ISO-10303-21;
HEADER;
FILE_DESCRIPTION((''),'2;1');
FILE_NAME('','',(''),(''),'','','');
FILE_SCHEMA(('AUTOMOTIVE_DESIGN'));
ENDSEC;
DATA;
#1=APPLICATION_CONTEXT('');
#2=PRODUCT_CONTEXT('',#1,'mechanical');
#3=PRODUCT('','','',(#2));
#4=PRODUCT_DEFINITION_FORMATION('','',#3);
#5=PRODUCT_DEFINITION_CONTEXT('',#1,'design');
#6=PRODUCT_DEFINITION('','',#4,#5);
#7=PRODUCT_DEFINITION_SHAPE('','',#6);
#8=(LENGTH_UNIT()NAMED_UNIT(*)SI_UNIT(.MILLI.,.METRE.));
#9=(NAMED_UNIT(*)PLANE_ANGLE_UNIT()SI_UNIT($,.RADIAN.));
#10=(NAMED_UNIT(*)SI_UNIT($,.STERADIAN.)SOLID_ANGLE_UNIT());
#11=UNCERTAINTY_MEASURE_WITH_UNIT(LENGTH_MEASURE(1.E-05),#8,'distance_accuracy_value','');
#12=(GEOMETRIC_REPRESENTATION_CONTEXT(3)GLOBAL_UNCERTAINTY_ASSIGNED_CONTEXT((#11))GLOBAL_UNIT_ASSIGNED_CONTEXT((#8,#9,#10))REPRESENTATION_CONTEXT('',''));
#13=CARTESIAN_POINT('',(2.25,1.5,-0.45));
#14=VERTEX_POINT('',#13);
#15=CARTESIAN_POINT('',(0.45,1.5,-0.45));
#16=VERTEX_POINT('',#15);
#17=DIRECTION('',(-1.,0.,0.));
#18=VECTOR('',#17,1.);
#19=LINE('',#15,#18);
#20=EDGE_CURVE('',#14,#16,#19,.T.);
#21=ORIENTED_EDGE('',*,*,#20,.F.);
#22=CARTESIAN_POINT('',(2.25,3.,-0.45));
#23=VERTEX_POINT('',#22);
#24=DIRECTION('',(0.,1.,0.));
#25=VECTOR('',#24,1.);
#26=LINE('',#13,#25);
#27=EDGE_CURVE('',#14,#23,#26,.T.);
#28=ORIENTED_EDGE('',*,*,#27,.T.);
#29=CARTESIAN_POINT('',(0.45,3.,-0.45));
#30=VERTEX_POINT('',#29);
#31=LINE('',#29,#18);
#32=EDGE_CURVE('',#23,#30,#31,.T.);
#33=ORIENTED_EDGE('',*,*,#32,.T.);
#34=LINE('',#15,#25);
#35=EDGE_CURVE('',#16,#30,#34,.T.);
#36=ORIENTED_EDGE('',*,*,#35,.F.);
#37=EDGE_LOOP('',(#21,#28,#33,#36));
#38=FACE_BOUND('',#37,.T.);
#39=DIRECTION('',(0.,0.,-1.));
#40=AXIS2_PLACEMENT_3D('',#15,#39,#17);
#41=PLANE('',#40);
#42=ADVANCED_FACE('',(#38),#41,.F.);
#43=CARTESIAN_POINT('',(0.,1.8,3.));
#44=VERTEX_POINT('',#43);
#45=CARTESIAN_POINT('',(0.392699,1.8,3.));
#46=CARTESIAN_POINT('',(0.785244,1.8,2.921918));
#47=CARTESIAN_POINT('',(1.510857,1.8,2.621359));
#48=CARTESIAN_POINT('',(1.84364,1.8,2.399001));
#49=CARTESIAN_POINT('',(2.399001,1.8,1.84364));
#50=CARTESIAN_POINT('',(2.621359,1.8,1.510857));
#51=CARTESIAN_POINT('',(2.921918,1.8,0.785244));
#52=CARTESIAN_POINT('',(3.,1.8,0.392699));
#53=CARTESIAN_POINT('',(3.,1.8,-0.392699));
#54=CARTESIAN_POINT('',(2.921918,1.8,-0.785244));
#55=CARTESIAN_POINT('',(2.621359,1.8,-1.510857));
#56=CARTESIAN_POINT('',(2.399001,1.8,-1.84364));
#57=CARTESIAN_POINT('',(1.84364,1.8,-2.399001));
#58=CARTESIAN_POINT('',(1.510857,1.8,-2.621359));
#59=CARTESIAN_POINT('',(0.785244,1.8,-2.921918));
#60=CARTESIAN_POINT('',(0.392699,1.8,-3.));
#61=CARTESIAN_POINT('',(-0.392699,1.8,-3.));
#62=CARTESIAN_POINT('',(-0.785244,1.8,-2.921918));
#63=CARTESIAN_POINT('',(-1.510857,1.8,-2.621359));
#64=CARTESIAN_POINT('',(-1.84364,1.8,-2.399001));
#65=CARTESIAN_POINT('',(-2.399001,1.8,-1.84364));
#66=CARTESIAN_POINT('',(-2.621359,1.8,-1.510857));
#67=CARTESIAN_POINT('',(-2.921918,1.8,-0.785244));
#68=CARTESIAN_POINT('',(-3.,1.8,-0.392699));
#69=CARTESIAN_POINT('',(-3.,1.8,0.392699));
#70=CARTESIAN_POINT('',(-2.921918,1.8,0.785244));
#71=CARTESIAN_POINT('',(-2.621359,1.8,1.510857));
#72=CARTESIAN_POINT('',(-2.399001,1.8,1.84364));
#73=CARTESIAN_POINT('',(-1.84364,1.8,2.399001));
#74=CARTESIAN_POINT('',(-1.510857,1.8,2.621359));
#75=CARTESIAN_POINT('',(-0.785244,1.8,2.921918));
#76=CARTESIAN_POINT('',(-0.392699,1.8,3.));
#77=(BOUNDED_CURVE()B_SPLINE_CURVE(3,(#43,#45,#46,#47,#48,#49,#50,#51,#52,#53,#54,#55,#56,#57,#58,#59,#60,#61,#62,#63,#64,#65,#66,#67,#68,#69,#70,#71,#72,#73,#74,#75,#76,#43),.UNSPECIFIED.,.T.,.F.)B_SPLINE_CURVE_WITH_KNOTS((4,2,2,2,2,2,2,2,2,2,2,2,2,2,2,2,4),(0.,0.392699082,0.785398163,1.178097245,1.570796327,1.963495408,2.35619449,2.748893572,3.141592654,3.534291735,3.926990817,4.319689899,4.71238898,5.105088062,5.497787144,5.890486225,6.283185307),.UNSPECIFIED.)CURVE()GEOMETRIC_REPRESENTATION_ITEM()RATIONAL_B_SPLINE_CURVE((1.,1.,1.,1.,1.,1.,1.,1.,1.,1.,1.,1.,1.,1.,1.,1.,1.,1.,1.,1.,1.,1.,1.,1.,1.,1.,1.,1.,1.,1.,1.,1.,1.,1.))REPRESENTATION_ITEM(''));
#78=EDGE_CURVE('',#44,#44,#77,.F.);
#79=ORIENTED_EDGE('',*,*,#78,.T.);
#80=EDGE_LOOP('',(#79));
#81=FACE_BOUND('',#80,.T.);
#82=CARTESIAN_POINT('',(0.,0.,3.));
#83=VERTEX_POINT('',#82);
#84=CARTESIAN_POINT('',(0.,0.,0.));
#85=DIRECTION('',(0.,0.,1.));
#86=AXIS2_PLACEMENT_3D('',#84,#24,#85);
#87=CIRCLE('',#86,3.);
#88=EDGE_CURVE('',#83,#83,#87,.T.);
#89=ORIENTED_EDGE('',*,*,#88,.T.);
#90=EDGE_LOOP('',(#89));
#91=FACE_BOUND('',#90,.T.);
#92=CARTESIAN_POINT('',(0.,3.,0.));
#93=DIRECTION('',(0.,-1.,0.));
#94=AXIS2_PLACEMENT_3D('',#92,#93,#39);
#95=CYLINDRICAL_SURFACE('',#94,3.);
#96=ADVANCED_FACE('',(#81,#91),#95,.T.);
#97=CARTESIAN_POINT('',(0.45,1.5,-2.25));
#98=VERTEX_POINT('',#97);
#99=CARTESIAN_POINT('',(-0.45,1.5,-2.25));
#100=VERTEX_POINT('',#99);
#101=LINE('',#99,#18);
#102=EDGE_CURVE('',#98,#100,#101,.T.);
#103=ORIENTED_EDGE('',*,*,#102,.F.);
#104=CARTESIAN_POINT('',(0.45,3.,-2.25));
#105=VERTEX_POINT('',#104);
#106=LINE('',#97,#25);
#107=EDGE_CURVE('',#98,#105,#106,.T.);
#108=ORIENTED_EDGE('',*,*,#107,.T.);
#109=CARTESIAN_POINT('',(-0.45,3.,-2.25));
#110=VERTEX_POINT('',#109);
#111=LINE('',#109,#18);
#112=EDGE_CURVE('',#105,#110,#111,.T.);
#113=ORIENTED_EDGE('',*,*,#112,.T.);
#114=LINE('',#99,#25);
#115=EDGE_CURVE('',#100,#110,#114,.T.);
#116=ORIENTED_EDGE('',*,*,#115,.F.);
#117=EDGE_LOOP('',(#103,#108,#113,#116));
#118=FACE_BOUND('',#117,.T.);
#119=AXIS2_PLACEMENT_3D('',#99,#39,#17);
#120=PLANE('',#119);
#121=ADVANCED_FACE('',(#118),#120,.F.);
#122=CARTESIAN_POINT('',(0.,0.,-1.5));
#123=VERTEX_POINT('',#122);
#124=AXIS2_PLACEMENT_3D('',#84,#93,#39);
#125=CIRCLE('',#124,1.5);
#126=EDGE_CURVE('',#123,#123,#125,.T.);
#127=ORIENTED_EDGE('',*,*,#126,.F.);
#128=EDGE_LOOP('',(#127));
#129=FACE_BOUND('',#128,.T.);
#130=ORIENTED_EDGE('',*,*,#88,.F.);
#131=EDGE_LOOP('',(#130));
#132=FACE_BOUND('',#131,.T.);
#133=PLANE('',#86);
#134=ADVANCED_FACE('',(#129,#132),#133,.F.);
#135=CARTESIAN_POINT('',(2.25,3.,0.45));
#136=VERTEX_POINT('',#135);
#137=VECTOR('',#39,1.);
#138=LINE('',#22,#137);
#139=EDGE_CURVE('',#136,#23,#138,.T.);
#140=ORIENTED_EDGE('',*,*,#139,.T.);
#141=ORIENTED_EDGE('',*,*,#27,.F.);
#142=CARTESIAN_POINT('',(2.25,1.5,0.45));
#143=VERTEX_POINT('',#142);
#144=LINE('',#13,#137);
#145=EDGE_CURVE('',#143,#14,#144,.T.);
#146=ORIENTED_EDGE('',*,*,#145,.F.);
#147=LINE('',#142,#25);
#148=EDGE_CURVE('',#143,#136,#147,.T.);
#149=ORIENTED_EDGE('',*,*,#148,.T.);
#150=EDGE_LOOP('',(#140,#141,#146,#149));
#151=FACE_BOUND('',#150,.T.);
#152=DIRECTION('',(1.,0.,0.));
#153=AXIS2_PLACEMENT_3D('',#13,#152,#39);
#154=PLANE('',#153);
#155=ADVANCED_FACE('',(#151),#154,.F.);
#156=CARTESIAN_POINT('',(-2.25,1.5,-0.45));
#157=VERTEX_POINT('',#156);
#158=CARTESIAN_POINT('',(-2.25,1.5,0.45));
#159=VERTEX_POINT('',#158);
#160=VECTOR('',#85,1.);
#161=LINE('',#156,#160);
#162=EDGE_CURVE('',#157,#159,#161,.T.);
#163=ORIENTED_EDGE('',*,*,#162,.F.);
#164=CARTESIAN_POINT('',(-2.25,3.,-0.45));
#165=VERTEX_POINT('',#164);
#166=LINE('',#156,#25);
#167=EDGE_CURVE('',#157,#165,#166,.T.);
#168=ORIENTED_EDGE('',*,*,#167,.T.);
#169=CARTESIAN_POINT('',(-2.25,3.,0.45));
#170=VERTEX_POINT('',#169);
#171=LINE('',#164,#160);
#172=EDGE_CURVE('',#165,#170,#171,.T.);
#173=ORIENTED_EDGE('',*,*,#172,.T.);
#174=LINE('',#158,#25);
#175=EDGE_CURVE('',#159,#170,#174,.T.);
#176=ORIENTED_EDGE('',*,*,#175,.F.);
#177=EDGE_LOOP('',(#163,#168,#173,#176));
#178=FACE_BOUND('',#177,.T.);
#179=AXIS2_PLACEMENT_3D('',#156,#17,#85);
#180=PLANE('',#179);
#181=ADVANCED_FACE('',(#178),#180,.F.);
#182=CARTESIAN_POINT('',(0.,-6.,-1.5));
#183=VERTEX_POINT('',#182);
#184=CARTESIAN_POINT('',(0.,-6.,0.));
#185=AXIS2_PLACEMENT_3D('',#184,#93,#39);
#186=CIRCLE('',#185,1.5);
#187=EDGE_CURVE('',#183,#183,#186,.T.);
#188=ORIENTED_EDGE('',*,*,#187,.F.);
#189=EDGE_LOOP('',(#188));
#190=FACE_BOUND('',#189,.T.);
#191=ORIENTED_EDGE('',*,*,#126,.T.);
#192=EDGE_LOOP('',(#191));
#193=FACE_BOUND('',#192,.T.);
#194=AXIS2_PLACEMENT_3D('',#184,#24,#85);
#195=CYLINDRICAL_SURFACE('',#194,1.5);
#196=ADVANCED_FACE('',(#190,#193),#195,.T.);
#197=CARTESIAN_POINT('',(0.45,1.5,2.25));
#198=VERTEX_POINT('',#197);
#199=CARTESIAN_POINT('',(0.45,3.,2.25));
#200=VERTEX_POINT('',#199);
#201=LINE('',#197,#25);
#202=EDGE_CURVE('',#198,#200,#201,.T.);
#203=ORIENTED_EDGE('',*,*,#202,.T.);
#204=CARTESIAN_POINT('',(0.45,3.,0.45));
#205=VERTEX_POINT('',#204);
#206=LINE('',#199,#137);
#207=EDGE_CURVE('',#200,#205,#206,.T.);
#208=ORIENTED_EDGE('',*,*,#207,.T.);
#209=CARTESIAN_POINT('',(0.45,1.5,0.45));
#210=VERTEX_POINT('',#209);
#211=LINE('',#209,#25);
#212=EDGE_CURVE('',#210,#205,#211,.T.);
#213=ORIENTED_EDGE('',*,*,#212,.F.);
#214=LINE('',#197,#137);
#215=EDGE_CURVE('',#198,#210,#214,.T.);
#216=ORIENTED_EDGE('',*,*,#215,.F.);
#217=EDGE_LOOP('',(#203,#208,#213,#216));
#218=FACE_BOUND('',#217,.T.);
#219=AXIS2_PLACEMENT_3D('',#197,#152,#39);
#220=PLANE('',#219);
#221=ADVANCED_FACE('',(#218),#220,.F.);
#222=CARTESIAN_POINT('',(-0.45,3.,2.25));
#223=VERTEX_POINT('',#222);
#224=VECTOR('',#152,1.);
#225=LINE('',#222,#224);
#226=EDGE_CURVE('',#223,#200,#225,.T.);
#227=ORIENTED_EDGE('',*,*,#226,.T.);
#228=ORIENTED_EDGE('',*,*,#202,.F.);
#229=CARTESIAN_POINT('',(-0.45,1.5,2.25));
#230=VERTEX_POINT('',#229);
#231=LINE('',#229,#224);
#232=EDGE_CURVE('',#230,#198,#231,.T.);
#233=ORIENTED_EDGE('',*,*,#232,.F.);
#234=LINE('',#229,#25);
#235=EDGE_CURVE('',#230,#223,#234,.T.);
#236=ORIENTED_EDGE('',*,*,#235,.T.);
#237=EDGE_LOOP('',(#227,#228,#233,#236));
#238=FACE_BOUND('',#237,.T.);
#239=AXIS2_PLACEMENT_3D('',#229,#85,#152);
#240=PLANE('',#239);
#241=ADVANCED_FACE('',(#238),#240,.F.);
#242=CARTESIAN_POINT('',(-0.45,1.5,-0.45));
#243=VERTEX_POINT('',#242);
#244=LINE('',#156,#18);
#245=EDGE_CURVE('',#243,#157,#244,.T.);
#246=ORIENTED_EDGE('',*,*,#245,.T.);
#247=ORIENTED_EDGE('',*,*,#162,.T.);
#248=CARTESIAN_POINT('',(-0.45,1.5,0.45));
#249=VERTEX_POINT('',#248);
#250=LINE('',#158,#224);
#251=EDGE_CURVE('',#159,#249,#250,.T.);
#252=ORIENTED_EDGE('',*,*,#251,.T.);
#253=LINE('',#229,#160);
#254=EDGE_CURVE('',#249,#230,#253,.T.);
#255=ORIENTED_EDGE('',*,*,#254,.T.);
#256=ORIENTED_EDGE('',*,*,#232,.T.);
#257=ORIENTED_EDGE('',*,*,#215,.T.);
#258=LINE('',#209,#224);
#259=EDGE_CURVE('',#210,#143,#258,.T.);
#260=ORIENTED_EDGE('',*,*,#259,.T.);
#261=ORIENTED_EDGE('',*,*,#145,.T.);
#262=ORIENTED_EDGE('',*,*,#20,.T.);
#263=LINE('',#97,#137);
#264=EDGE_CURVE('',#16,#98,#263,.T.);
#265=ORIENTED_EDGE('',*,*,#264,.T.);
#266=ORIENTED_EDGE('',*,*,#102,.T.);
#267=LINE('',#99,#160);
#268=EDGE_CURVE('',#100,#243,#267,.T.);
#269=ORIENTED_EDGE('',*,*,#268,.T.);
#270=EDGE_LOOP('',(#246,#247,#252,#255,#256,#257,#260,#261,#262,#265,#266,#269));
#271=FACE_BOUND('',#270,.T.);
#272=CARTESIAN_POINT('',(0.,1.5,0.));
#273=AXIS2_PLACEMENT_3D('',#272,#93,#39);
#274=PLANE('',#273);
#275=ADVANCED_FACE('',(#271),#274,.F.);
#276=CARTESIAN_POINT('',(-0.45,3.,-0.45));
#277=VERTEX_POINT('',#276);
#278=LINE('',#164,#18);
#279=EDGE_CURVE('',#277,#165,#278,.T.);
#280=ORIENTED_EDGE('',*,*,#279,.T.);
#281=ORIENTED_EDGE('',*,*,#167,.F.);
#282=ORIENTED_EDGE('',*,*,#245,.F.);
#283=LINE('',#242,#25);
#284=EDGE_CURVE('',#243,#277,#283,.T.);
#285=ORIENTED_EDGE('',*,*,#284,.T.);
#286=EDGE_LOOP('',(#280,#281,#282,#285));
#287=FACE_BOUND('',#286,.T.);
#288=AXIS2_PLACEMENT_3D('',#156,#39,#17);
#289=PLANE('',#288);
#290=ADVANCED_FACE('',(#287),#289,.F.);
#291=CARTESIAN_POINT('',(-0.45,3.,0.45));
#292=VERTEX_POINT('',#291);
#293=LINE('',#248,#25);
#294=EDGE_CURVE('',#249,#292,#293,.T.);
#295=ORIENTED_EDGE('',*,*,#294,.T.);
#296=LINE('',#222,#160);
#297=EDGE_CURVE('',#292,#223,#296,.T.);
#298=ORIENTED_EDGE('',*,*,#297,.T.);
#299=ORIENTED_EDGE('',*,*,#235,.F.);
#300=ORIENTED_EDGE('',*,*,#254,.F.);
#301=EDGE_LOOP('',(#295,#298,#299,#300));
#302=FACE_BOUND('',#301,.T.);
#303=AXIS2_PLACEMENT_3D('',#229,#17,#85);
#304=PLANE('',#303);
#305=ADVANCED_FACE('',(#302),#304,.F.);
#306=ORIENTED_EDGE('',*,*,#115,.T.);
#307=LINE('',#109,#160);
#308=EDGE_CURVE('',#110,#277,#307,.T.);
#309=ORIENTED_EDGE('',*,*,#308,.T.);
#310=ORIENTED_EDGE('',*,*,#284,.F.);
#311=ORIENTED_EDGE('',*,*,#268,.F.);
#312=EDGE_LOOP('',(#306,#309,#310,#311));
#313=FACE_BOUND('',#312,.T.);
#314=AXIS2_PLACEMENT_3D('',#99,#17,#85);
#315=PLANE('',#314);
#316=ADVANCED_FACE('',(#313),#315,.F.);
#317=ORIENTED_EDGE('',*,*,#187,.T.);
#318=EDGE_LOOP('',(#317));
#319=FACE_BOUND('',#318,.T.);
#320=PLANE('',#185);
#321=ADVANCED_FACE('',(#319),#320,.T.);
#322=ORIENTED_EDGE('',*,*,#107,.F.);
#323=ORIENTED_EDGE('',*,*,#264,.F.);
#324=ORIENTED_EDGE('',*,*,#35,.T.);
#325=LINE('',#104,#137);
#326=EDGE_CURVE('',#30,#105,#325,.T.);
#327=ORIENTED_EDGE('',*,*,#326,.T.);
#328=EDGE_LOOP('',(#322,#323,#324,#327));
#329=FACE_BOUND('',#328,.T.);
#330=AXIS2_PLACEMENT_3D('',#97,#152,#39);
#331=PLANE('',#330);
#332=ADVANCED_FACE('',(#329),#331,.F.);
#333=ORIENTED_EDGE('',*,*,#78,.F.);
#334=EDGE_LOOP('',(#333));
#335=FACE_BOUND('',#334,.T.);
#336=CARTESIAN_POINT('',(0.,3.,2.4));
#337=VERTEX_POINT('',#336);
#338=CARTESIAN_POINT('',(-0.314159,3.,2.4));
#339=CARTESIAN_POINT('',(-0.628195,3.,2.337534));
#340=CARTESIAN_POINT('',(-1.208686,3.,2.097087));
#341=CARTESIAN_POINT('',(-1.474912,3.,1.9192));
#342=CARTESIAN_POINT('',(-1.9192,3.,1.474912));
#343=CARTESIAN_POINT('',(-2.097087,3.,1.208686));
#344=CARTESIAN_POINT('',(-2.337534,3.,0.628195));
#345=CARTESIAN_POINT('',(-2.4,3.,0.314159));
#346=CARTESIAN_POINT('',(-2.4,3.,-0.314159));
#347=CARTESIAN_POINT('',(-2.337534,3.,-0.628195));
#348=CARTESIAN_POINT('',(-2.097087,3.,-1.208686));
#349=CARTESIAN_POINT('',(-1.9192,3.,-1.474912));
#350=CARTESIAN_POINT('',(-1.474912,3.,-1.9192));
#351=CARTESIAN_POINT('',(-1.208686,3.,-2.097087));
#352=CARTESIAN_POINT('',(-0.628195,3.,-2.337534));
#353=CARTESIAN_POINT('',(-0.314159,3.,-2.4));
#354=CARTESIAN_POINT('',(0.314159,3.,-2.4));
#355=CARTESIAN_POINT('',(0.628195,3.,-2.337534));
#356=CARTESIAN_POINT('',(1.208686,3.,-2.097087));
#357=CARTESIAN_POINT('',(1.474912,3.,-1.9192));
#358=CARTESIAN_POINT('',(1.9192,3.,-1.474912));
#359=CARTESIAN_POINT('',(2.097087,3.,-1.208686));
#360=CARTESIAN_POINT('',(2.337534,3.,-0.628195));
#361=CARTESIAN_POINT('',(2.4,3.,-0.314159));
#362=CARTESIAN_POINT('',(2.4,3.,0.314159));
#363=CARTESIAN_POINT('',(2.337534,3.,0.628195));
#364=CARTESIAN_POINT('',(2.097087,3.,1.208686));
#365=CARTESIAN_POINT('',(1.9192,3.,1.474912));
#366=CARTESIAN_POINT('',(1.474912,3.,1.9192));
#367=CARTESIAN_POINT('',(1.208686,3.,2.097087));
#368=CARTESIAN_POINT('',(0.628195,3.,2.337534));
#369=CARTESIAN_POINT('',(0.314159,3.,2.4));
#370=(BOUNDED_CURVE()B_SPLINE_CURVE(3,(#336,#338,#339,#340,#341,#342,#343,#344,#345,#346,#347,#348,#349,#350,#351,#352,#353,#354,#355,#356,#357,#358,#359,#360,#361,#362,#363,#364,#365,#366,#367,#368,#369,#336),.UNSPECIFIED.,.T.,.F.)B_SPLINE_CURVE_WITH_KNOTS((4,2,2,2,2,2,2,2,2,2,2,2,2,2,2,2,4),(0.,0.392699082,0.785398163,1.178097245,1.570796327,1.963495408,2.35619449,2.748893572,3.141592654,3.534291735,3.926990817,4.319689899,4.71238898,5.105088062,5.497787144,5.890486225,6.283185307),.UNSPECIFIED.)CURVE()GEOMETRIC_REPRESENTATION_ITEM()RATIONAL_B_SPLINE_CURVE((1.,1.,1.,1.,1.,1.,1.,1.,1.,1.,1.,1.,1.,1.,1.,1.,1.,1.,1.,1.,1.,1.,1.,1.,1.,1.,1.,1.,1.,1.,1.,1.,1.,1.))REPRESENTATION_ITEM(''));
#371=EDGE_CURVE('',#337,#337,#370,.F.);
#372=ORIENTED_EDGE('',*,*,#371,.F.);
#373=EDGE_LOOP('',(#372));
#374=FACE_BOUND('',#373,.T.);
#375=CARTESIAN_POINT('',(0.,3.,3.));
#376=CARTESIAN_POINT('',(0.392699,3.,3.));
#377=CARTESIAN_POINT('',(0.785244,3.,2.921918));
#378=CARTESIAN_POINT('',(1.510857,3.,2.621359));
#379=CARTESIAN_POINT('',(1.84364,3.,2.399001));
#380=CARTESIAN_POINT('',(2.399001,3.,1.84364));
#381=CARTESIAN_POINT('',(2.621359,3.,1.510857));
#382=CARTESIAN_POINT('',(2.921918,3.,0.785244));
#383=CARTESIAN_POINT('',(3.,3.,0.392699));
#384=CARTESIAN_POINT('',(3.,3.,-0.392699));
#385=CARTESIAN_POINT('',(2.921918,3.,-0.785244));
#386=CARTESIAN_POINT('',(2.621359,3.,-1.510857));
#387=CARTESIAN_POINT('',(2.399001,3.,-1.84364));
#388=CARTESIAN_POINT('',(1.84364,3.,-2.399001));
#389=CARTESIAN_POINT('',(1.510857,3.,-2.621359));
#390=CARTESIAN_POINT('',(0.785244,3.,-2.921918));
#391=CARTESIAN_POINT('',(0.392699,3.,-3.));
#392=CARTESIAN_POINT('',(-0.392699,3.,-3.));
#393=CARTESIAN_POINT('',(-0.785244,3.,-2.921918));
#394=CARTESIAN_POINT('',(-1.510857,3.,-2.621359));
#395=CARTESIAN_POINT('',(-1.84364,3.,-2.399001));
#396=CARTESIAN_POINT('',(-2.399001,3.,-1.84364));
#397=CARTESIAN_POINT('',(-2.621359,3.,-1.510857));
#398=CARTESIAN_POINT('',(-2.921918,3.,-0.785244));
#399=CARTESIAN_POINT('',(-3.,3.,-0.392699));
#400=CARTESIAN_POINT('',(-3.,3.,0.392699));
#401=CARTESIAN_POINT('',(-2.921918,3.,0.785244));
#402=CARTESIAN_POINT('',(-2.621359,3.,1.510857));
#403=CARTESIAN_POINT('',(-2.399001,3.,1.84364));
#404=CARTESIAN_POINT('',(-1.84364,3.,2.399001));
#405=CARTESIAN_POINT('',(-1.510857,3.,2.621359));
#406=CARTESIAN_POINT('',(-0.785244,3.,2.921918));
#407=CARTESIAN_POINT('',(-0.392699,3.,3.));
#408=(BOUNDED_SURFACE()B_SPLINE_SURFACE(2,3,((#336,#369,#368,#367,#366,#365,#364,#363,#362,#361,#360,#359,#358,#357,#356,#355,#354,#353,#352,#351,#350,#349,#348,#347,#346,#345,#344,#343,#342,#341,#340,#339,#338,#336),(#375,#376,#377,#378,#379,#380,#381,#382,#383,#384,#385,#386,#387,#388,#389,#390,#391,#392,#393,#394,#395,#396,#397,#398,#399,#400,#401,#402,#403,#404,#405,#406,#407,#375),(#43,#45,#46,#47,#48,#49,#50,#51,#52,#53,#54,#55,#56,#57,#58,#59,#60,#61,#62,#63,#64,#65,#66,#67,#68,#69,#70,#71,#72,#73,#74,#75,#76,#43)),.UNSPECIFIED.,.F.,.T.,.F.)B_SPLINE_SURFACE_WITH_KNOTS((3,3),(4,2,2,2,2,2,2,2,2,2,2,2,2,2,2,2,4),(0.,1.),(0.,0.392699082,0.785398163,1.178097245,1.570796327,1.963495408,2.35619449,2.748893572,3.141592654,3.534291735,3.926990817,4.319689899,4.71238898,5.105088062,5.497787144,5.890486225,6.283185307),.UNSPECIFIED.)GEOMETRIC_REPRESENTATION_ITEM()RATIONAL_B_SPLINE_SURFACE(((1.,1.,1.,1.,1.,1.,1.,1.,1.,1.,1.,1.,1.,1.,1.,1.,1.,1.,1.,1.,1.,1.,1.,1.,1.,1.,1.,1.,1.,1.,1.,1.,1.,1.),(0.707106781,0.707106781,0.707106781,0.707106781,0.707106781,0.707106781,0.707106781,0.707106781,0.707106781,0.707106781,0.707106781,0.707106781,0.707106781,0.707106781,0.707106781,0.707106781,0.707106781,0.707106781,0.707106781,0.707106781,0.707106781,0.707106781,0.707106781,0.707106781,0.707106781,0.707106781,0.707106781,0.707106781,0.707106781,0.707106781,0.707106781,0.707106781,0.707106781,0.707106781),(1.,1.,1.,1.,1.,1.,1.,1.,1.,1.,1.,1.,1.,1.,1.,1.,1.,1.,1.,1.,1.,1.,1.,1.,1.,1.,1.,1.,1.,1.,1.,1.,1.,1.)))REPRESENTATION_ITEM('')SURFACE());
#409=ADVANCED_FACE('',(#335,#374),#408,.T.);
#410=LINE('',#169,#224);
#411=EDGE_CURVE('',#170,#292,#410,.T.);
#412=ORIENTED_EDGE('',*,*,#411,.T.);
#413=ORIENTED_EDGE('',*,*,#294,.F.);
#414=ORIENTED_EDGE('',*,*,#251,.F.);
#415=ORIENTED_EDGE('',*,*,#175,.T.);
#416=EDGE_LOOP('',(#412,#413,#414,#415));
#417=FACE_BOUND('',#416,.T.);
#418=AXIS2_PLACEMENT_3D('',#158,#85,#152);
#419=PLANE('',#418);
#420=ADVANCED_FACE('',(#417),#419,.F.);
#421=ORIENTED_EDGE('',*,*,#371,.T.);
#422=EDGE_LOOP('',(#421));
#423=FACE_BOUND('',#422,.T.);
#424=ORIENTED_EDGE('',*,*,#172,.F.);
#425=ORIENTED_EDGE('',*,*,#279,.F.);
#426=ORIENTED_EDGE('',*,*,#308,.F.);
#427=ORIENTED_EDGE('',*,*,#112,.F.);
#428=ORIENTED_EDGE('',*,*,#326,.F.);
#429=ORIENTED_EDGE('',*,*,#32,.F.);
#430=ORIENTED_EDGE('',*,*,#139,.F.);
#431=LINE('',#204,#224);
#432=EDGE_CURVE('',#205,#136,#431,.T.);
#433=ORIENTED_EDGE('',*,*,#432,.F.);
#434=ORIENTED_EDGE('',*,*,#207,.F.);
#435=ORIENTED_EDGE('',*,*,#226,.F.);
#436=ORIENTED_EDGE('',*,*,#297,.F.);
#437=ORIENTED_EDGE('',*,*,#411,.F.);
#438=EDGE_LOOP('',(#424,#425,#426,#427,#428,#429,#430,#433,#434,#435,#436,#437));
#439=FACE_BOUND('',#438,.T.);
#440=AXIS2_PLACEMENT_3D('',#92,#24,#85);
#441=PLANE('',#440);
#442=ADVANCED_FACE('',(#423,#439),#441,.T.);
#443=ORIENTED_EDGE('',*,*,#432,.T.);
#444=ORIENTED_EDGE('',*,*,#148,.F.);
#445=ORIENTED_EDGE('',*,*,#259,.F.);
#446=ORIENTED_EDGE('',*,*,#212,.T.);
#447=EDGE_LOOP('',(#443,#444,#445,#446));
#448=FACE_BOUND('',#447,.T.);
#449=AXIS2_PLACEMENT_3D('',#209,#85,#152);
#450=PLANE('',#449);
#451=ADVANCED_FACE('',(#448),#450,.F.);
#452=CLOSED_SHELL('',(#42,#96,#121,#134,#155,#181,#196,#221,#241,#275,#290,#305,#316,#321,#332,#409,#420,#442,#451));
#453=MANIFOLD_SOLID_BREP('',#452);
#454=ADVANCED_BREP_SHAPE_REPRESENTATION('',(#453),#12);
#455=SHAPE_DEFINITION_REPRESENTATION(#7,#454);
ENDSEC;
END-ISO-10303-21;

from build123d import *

# Parameters (mm, degrees)
SKETCH1_R           = 3
BOSS_EXTRUDE1_DEPTH = 3
SKETCH2_R           = 1.5
BOSS_EXTRUDE2_DEPTH = 6
CUT_EXTRUDE1_DEPTH  = 1.5
FILLET1_SIZE        = 1.2
FILLET1_SIZE_2      = 0.6


with BuildPart() as part:
    # Sketch1 → Boss-Extrude1 (new body)
    with BuildSketch(Plane(origin=(0, 0, 0), x_dir=(1, 0, 0), z_dir=(0, 1, 0))):
        with Locations(Location((0, 0, 0), (0, 0, 270))):
            Circle(SKETCH1_R)
    extrude(amount=BOSS_EXTRUDE1_DEPTH)

    # Sketch2 → Boss-Extrude2 (add)
    with BuildSketch(Plane.XZ):
        with Locations(Location((0, 0, 0), (0, 0, 270))):
            Circle(SKETCH2_R)
    extrude(amount=BOSS_EXTRUDE2_DEPTH)

    # Sketch3 → Cut-Extrude1 (cut)
    with BuildSketch(Plane(origin=(0, 3, 0), x_dir=(1, 0, 0), z_dir=(0, 1, 0))):
        Polygon((-0.45, 2.25), (-0.45, 0.45), (-2.25, 0.45), (-2.25, -0.45), (-0.45, -0.45), (-0.45, -2.25), (0.45, -2.25), (0.45, -0.45), (2.25, -0.45), (2.25, 0.45), (0.45, 0.45), (0.45, 2.25), align=None)
    extrude(amount=-CUT_EXTRUDE1_DEPTH, mode=Mode.SUBTRACT)

    # Fillet1
    # an asymmetric fillet: 1.2, 0.6 mm, written as the material it takes off along each edge
    with BuildSketch(Plane(origin=(0, 3, 0), x_dir=(0, 0, 1), z_dir=(-1, 0, 0))) as fillet1_piece_1:
        with BuildLine():
            Bezier((3, -FILLET1_SIZE), (3, 0), (3 - FILLET1_SIZE_2, 0), weights=[1, 0.707106781, 1])
            Line((3 - FILLET1_SIZE_2, 0), (3, 0))
            Line((3, 0), (3, -FILLET1_SIZE))
        make_face()
    revolve(axis=Axis((0, 3, 0), (0, 1, 0)), mode=Mode.SUBTRACT)


solid = part.part
